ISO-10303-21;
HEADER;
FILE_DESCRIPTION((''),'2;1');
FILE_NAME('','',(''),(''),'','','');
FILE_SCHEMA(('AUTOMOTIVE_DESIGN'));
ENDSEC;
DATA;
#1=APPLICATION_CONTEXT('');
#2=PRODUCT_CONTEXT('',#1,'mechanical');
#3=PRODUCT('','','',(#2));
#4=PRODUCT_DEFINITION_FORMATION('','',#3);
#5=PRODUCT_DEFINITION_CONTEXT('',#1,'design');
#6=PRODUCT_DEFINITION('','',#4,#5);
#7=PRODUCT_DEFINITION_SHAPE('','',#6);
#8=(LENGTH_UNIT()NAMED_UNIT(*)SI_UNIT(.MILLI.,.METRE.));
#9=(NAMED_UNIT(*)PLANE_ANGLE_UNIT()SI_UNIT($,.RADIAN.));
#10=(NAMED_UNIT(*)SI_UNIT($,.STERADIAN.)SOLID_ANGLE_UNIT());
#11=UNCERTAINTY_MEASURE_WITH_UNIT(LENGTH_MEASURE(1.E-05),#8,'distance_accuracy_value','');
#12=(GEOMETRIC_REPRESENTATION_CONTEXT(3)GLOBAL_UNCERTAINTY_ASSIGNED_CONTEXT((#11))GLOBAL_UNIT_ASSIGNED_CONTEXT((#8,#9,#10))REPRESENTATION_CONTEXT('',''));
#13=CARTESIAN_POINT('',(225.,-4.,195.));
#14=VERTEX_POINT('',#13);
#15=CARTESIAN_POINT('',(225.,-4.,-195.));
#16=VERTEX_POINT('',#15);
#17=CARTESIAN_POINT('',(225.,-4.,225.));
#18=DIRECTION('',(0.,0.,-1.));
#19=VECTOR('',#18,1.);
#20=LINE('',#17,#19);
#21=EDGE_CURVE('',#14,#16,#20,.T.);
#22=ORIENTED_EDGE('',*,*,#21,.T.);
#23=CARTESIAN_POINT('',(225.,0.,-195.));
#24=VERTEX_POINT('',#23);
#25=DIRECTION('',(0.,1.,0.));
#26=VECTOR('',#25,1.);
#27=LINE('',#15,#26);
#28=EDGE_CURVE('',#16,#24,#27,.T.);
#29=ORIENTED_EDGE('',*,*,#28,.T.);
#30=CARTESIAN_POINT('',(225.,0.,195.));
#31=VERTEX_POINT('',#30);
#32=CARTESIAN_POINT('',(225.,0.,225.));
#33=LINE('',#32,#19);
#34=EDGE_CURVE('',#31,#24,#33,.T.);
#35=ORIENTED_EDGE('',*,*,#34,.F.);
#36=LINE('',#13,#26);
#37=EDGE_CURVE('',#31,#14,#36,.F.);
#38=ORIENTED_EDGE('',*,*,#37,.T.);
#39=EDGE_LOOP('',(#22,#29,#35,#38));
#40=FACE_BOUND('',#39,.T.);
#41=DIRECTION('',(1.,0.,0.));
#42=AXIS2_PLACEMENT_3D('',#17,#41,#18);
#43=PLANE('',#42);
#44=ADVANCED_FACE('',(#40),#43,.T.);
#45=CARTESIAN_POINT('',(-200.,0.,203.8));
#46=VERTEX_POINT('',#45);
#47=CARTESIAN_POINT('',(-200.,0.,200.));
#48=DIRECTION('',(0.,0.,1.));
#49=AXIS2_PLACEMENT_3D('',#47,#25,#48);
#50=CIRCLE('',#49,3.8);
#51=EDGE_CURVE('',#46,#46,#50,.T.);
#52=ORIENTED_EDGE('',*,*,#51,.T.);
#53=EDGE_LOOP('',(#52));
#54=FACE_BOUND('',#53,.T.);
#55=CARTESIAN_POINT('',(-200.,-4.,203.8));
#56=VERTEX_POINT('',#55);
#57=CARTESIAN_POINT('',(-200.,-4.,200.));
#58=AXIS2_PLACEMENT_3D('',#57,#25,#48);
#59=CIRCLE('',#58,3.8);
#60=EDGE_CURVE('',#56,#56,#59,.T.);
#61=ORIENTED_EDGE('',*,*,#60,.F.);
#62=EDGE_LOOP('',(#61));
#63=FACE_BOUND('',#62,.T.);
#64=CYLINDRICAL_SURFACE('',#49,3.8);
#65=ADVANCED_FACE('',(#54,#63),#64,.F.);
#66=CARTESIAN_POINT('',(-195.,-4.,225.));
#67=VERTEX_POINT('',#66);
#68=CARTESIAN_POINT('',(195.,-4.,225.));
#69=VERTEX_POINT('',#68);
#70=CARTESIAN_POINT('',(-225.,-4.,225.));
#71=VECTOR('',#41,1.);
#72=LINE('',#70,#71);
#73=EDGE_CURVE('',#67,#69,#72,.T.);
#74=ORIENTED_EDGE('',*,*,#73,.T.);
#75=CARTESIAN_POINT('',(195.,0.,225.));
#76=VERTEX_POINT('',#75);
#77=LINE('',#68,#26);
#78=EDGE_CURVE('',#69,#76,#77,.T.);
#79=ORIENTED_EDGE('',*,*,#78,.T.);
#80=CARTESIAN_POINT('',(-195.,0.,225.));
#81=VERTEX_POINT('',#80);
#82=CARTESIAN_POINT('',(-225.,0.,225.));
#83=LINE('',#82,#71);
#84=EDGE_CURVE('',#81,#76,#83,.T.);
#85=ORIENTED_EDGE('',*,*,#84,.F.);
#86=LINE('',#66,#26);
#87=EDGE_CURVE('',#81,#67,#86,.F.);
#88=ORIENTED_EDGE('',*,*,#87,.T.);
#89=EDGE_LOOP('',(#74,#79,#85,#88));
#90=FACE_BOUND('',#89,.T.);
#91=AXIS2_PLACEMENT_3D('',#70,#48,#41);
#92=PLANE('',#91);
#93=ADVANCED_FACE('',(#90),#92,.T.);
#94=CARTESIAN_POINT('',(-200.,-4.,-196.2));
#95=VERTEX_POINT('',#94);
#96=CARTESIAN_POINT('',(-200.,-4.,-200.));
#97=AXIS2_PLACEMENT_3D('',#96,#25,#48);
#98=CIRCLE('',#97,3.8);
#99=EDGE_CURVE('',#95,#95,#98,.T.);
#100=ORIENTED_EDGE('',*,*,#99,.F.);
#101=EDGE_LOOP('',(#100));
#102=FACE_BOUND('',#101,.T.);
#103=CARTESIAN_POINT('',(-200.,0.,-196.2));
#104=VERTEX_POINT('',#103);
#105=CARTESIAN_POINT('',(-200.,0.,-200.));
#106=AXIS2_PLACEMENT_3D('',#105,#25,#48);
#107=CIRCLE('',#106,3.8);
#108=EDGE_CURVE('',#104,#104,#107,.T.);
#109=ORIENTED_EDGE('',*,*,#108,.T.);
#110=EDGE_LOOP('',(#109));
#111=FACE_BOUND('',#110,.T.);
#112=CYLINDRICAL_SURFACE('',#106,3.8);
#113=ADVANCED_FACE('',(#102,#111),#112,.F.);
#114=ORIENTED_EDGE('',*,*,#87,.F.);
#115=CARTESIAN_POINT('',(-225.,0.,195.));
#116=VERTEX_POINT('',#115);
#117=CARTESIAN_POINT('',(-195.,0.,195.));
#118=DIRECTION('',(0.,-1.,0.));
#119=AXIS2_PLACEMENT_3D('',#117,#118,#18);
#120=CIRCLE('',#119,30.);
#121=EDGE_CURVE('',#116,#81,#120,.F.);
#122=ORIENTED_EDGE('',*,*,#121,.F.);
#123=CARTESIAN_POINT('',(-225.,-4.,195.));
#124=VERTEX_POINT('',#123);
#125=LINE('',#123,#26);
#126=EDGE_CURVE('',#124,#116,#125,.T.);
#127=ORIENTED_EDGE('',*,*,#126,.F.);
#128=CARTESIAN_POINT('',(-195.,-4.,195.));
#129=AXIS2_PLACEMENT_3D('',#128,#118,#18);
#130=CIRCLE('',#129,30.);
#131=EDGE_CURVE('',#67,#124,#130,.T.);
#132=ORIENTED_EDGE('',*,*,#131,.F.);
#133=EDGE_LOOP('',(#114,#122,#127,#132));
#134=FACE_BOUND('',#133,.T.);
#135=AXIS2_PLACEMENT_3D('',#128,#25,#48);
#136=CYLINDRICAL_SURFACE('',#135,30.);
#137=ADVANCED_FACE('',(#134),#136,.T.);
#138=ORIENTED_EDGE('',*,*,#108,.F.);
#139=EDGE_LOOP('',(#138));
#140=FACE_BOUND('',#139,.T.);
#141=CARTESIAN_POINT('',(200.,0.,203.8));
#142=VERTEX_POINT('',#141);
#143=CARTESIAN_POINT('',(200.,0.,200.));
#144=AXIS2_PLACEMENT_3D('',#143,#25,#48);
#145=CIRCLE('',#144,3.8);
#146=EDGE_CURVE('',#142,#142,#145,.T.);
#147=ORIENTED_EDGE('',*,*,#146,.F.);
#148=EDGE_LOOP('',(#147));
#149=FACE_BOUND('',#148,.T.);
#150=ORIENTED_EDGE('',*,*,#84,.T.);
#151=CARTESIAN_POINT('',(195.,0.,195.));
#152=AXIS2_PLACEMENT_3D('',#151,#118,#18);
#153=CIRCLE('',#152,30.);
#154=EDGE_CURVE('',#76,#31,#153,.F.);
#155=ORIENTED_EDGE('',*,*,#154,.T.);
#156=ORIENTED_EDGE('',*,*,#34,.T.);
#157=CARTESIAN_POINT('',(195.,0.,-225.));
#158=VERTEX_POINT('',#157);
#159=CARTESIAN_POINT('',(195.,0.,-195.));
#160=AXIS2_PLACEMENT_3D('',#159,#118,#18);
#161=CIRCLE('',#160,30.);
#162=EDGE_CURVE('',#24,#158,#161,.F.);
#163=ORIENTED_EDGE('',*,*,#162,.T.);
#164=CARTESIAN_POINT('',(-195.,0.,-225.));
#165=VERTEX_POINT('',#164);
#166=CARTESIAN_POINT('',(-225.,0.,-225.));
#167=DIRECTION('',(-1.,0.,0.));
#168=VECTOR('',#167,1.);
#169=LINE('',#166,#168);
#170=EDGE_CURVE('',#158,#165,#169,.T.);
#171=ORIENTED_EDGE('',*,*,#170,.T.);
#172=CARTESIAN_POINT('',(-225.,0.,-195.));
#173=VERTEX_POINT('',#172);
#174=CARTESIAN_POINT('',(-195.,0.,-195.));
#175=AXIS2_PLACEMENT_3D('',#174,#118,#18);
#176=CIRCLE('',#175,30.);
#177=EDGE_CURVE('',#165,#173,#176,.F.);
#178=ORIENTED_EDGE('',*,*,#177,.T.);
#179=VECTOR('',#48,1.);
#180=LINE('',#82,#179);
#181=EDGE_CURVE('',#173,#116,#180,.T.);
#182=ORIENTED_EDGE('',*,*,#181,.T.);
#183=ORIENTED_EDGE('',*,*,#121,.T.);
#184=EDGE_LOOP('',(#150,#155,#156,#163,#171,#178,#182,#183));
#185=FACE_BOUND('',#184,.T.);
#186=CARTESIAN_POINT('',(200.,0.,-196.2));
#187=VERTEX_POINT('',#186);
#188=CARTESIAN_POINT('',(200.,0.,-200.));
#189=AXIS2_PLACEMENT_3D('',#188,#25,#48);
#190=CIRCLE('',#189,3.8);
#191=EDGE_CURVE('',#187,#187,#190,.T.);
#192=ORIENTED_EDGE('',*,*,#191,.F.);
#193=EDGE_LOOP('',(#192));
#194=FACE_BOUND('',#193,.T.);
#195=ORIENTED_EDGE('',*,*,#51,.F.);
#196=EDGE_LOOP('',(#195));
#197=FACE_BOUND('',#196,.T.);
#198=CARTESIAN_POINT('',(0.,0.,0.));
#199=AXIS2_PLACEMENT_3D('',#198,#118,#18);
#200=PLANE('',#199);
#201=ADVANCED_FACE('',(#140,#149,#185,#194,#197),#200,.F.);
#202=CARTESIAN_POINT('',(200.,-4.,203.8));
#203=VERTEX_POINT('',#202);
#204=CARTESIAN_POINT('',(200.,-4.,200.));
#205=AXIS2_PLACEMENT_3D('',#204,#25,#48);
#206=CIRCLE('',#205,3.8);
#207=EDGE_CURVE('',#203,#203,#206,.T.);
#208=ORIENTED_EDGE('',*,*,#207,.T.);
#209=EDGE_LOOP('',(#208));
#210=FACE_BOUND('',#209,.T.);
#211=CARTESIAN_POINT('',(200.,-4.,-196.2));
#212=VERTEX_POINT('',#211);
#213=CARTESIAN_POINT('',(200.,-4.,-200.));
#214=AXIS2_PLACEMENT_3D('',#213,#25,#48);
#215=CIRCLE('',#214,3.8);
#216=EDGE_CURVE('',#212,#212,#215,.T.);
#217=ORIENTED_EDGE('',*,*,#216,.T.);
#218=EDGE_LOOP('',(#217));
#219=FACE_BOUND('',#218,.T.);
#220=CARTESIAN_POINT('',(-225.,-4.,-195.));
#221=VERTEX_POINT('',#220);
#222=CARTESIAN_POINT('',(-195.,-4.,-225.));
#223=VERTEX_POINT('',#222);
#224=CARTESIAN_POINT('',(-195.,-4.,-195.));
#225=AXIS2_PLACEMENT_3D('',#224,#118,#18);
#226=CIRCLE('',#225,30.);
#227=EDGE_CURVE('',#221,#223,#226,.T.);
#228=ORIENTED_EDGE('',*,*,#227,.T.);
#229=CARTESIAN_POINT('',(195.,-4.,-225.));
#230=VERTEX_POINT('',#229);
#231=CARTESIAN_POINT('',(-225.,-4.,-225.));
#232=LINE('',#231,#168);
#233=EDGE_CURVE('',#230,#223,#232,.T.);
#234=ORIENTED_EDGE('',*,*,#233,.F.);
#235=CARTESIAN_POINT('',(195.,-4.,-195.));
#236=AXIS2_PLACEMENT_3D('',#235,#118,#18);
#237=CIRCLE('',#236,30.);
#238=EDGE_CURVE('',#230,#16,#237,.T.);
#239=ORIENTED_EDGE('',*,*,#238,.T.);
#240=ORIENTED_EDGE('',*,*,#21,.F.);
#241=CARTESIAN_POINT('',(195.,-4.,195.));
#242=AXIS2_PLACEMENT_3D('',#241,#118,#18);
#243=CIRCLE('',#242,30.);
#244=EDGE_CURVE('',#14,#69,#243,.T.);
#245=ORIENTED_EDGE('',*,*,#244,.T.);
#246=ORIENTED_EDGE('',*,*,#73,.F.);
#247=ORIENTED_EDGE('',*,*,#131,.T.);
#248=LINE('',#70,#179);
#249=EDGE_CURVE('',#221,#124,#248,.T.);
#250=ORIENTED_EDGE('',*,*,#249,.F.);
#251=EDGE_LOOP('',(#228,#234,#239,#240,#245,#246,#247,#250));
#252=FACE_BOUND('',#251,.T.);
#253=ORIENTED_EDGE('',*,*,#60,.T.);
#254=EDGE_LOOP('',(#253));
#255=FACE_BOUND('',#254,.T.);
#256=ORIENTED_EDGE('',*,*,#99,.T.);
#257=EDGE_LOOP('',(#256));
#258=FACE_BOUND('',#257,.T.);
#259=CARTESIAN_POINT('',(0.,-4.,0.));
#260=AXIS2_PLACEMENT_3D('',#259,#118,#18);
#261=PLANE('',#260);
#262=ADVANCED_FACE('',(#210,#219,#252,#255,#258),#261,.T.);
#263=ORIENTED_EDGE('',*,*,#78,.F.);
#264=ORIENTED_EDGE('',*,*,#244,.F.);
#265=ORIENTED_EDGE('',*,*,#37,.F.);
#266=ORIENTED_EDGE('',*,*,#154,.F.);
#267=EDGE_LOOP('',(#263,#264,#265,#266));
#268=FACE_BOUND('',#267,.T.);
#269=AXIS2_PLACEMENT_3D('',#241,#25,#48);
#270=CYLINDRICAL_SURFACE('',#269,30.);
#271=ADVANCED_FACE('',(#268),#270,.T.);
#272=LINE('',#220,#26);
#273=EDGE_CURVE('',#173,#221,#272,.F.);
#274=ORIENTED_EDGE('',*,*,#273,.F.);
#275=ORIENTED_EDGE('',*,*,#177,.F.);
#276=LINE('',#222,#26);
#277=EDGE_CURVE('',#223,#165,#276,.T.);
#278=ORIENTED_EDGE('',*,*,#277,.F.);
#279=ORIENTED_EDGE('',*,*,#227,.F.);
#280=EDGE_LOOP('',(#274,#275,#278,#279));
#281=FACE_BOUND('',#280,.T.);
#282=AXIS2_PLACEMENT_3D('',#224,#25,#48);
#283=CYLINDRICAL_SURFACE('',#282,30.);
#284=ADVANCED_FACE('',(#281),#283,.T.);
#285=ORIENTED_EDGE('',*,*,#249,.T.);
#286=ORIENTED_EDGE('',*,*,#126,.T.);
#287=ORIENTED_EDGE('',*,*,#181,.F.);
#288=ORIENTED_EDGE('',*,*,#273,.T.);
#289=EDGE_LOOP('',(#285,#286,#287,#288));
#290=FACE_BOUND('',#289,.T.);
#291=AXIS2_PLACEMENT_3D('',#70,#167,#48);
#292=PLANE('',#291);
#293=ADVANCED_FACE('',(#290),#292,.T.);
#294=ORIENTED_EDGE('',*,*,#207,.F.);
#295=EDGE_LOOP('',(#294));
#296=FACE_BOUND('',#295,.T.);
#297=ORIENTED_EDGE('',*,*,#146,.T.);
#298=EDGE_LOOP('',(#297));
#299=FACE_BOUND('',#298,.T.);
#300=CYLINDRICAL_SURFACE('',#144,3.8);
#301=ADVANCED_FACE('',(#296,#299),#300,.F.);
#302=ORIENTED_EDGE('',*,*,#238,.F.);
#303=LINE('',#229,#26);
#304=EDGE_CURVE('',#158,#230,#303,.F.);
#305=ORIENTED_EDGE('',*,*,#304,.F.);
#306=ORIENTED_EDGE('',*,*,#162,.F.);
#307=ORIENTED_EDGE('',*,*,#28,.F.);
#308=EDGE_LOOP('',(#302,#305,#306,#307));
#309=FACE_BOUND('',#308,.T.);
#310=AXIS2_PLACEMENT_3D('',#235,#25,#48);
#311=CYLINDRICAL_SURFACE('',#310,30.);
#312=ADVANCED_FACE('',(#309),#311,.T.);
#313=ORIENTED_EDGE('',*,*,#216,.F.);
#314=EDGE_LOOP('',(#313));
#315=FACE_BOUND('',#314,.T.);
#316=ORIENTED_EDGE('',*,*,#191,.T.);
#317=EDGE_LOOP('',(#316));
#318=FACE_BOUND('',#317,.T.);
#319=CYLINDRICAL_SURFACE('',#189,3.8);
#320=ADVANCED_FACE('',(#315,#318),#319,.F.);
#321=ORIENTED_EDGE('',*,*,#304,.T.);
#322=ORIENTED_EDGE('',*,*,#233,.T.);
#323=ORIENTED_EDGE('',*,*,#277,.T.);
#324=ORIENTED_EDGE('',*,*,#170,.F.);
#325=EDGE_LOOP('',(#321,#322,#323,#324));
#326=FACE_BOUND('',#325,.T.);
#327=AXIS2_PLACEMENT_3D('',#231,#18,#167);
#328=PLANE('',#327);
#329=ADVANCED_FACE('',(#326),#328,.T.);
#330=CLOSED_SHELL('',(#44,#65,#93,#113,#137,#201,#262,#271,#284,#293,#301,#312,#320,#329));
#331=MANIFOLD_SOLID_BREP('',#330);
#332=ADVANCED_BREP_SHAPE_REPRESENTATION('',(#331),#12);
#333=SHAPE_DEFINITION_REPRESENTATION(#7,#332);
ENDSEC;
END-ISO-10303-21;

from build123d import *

# Parameters (mm, degrees)
SKETCH1_W            = 450
SKETCH1_H            = 450
BASE_FLANGE1_DEPTH   = 4
FILLET1_R            = 30
M7_CLEARANCE_HOLE1_D = 7.6


# Sheet-metal steps are written as plain solids
with BuildPart() as part:
    # Sketch1 → Base-Flange1 (new body)
    with BuildSketch(Plane(origin=(0, 0, 0), x_dir=(1, 0, 0), z_dir=(0, 1, 0))):
        Rectangle(SKETCH1_W, SKETCH1_H)
    extrude(amount=-BASE_FLANGE1_DEPTH)

    # Fillet1
    fillet1_edges = [part.edges().sort_by_distance(p)[0] for p in [
        (225, -2, 225),
        (-225, -2, 225),
        (-225, -2, -225),
        (225, -2, -225),
    ]]
    fillet(fillet1_edges, radius=FILLET1_R)

    # M7 Clearance Hole1 (through all)
    with Locations(Plane(origin=(0, 0, 0), x_dir=(1, 0, 0), z_dir=(0, 1, 0))):
        with Locations((200, 200), (-200, -200), (-200, 200), (200, -200)):
            Hole(M7_CLEARANCE_HOLE1_D / 2)


solid = part.part
